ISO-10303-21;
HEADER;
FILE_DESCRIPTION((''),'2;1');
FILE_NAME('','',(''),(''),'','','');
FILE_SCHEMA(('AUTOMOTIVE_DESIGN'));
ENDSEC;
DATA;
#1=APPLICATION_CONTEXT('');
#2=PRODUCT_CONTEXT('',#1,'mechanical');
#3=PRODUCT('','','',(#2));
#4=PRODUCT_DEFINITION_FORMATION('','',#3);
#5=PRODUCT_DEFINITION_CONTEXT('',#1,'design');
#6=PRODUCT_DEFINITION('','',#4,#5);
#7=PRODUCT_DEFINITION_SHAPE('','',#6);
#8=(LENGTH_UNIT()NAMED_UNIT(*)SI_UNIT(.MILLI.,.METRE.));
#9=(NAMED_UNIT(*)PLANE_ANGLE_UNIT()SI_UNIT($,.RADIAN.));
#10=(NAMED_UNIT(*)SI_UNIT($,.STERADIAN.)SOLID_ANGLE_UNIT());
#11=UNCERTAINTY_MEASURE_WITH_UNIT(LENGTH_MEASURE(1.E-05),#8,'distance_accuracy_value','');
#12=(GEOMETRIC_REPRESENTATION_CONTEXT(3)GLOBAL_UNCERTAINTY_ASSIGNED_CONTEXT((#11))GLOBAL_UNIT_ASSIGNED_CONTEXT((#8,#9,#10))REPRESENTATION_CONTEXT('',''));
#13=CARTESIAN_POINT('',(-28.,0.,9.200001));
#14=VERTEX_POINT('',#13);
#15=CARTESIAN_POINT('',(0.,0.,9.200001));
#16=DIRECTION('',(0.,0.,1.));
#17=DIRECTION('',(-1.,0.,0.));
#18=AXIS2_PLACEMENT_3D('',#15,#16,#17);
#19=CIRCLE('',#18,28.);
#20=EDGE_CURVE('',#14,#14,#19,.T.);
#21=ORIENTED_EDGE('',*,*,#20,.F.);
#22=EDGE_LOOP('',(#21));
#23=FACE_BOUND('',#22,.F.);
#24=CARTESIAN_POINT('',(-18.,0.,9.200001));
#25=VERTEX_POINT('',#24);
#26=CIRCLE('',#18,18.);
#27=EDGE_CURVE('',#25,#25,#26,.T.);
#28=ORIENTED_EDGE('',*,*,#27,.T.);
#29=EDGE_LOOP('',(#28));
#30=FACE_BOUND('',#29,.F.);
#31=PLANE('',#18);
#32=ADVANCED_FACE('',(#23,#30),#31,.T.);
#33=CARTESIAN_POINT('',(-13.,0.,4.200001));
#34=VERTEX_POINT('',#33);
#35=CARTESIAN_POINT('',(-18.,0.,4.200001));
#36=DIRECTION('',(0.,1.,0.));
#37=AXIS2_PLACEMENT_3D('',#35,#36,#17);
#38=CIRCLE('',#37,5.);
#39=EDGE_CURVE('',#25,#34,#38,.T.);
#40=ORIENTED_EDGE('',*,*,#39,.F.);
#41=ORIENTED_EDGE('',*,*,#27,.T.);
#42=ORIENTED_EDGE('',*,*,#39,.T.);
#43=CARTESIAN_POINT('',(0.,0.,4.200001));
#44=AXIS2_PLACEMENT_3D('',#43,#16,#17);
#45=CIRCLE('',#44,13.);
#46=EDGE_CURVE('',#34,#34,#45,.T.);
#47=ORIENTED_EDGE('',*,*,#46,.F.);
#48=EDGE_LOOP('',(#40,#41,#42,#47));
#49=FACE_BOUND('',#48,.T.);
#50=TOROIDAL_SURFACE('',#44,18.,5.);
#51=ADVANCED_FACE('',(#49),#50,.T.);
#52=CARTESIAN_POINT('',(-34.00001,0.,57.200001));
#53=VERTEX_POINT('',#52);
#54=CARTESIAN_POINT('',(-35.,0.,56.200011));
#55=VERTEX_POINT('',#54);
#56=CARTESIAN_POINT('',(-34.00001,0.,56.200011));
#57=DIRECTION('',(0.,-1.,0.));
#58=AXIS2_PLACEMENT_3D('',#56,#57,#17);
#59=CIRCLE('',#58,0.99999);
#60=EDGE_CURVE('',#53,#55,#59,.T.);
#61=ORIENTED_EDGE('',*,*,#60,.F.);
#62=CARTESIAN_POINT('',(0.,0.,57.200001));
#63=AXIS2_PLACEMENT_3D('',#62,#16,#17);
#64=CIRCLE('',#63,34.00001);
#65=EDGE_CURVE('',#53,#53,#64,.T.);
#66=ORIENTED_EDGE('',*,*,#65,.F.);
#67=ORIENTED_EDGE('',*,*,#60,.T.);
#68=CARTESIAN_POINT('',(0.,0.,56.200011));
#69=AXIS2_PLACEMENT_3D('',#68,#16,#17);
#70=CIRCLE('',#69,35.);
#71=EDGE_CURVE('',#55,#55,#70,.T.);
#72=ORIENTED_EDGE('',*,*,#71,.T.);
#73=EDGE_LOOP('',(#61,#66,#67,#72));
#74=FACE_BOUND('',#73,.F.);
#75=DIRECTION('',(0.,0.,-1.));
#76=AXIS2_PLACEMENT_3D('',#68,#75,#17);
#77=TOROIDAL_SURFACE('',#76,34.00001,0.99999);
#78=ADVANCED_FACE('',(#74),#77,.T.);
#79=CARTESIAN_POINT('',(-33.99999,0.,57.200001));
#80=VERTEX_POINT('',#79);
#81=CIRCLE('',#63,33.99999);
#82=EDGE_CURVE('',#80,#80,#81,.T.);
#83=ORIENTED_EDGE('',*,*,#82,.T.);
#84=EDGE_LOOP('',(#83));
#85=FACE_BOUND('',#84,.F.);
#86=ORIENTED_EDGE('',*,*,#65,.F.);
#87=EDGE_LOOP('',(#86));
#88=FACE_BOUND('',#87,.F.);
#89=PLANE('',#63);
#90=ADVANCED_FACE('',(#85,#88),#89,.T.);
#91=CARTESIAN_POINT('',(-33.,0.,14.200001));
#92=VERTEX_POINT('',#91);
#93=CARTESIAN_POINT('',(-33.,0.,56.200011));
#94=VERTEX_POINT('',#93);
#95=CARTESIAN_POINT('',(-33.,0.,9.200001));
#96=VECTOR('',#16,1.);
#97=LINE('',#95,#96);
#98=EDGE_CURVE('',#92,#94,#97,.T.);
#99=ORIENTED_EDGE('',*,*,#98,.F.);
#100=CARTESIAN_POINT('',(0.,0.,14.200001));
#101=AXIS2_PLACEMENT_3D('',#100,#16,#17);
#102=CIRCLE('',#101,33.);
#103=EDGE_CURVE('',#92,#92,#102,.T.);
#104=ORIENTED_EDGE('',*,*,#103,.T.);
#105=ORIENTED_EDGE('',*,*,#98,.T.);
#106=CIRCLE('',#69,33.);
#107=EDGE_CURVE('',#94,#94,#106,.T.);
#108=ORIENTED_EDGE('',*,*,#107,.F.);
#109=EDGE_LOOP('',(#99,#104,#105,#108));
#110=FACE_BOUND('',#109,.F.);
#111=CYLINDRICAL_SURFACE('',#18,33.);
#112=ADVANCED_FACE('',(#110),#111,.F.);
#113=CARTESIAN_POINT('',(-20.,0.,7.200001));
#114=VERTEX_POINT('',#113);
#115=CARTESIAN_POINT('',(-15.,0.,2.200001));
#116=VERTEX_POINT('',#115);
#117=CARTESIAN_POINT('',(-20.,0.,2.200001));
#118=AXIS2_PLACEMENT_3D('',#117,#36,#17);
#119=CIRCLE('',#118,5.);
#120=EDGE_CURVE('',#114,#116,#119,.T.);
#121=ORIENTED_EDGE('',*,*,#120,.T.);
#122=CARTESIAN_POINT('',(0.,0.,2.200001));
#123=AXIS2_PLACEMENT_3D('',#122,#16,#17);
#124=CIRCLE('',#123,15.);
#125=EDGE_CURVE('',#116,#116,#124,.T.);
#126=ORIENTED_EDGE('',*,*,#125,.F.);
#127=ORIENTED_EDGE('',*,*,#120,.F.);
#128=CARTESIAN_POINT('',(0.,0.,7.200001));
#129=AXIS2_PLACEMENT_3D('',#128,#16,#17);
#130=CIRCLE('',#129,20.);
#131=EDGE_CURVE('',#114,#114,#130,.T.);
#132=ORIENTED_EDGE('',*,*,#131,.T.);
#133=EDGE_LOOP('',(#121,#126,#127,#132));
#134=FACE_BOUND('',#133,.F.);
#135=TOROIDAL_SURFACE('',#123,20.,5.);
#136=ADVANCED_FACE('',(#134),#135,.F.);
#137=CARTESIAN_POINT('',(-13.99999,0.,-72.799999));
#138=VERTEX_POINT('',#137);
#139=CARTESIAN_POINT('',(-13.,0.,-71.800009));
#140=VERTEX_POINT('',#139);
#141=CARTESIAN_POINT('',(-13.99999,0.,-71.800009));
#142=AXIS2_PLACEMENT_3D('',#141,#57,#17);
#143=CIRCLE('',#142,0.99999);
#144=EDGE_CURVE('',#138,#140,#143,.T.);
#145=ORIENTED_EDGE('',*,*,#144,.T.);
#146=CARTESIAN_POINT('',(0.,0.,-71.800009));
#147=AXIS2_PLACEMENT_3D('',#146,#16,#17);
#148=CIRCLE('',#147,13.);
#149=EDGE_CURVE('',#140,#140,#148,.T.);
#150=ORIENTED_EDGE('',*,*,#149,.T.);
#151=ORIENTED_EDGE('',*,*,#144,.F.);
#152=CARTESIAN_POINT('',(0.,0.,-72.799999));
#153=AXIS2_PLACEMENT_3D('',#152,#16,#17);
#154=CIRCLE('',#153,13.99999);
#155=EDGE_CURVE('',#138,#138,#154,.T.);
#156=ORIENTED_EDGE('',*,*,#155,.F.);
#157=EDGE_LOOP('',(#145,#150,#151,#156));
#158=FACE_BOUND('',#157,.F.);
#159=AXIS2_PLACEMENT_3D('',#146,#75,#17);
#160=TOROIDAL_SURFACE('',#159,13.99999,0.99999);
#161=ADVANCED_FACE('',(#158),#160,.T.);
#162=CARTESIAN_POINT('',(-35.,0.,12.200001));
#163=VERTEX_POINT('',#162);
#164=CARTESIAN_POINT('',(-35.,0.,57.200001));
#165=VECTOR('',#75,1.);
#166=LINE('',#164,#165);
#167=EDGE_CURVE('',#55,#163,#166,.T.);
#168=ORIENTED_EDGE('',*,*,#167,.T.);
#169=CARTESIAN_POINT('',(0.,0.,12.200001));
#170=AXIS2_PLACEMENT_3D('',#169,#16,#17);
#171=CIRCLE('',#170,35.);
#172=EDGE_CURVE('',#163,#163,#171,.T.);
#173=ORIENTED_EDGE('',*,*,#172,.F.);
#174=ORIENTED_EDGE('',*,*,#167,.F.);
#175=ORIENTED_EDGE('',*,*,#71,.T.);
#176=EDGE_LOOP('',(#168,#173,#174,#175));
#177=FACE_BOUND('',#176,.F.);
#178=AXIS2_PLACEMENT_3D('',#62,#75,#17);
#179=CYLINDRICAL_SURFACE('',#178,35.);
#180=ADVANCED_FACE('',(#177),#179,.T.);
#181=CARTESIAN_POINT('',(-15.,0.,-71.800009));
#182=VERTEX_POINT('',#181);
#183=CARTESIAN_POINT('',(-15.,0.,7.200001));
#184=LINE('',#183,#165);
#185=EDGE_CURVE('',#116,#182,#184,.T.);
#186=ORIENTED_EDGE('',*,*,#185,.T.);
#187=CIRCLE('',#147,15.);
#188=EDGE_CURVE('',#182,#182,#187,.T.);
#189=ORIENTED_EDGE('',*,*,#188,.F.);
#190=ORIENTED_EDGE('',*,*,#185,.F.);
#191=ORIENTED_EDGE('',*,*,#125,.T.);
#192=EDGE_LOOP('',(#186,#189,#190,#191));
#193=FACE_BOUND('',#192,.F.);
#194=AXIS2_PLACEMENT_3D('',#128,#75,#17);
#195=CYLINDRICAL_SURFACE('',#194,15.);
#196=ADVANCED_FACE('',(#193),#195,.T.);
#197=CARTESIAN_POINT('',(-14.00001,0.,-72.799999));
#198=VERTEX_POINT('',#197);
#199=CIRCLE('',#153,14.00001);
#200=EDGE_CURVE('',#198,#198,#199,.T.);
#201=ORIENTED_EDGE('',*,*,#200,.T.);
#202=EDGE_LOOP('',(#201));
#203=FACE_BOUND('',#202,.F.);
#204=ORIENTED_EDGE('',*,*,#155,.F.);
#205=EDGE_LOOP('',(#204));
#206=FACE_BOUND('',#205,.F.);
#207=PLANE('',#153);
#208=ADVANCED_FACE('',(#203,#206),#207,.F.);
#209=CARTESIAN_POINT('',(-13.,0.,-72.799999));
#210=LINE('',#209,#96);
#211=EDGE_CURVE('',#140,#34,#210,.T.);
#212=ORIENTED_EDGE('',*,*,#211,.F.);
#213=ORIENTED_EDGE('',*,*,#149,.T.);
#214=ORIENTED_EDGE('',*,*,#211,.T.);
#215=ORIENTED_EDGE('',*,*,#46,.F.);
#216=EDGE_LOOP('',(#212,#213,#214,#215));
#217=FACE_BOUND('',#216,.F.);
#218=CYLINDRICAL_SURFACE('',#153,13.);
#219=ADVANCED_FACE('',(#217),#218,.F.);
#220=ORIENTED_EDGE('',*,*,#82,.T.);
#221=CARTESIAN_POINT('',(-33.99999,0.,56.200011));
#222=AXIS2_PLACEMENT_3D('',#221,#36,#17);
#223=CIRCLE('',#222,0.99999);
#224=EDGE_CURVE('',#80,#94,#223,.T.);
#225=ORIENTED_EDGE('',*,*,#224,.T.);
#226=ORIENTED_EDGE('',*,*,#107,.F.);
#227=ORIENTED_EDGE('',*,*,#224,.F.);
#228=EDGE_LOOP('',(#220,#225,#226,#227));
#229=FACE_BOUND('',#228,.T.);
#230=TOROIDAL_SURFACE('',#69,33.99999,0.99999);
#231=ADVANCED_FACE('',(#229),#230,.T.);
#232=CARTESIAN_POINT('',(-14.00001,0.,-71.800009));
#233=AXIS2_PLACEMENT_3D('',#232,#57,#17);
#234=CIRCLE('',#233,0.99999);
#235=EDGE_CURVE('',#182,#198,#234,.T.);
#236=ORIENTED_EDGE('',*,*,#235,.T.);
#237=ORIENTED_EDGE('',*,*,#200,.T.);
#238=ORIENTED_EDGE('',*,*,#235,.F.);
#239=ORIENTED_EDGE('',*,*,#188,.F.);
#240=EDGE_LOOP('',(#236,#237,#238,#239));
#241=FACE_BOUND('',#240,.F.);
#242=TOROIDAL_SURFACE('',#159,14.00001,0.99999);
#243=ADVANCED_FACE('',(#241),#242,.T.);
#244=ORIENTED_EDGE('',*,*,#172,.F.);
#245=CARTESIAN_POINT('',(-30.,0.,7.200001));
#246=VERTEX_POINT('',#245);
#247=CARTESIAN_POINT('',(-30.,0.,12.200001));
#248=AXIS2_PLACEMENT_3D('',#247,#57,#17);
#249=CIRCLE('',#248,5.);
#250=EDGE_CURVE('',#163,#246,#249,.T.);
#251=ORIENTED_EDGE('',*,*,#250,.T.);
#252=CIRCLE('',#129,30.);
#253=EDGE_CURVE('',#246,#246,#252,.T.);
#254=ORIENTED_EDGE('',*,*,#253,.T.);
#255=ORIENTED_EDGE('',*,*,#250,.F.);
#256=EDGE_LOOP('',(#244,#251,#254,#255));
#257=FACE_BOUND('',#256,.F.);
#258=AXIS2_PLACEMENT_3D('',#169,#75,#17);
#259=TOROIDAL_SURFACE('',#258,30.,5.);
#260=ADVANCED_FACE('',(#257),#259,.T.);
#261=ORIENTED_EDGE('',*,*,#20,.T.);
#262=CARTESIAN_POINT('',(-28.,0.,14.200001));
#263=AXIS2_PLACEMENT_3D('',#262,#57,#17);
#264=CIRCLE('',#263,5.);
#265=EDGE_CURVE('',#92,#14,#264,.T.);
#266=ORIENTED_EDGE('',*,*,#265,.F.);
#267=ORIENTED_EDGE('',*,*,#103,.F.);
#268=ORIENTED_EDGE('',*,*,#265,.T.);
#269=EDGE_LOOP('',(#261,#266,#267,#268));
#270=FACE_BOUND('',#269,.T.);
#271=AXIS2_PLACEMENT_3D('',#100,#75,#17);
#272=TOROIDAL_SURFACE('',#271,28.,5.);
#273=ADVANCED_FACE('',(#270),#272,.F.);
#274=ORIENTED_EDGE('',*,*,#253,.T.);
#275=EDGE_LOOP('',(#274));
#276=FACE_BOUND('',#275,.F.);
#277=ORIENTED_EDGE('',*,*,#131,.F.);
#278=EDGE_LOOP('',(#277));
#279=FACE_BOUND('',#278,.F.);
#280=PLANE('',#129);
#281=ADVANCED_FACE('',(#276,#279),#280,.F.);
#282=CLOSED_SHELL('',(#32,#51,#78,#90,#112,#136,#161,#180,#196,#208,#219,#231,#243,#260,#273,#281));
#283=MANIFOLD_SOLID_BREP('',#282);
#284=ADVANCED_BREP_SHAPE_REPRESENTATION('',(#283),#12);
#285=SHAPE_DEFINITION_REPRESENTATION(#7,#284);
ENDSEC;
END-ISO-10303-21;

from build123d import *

# Parameters (mm, degrees)
F2_R = 0.99999
F3_R = 5
F4_R = 5


# Not quite as in the source:
# - a fillet or chamfer is up to 0.001 mm smaller than in the source, because OpenCascade refuses the exact size


with BuildPart() as f1:
    # F0 (on Front) → F1 (revolve)
    with BuildSketch(Plane.XZ):
        Polygon((-33, 57.2000007471), (-35, 57.2000007471), (-35, 7.2000007471), (-15, 7.2000007471), (-15, -72.7999992529), (-13, -72.7999992529), (-13, 9.2000007471), (-33, 9.2000007471), align=None)
    revolve(axis=Axis((0, 0, -7.7999992529), (0, 0, 1)))

    # F2 (radius 1 in the source; OpenCascade refuses exactly that, so slightly less here)
    f2_edges = [f1.edges().sort_by_distance(p)[0] for p in [
        (35, 0, 57.200001),
        (33, 0, 57.200001),
        (15, 0, -72.799999),
        (13, 0, -72.799999),
    ]]
    fillet(f2_edges, radius=F2_R)

    # F3
    f3_edges = [f1.edges().sort_by_distance(p)[0] for p in [
        (15, 0, 7.200001),
        (35, 0, 7.200001),
    ]]
    fillet(f3_edges, radius=F3_R)

    # F4
    f4_edges = [f1.edges().sort_by_distance(p)[0] for p in [
        (13, 0, 9.200001),
        (33, 0, 9.200001),
    ]]
    fillet(f4_edges, radius=F4_R)


solid = f1.part
